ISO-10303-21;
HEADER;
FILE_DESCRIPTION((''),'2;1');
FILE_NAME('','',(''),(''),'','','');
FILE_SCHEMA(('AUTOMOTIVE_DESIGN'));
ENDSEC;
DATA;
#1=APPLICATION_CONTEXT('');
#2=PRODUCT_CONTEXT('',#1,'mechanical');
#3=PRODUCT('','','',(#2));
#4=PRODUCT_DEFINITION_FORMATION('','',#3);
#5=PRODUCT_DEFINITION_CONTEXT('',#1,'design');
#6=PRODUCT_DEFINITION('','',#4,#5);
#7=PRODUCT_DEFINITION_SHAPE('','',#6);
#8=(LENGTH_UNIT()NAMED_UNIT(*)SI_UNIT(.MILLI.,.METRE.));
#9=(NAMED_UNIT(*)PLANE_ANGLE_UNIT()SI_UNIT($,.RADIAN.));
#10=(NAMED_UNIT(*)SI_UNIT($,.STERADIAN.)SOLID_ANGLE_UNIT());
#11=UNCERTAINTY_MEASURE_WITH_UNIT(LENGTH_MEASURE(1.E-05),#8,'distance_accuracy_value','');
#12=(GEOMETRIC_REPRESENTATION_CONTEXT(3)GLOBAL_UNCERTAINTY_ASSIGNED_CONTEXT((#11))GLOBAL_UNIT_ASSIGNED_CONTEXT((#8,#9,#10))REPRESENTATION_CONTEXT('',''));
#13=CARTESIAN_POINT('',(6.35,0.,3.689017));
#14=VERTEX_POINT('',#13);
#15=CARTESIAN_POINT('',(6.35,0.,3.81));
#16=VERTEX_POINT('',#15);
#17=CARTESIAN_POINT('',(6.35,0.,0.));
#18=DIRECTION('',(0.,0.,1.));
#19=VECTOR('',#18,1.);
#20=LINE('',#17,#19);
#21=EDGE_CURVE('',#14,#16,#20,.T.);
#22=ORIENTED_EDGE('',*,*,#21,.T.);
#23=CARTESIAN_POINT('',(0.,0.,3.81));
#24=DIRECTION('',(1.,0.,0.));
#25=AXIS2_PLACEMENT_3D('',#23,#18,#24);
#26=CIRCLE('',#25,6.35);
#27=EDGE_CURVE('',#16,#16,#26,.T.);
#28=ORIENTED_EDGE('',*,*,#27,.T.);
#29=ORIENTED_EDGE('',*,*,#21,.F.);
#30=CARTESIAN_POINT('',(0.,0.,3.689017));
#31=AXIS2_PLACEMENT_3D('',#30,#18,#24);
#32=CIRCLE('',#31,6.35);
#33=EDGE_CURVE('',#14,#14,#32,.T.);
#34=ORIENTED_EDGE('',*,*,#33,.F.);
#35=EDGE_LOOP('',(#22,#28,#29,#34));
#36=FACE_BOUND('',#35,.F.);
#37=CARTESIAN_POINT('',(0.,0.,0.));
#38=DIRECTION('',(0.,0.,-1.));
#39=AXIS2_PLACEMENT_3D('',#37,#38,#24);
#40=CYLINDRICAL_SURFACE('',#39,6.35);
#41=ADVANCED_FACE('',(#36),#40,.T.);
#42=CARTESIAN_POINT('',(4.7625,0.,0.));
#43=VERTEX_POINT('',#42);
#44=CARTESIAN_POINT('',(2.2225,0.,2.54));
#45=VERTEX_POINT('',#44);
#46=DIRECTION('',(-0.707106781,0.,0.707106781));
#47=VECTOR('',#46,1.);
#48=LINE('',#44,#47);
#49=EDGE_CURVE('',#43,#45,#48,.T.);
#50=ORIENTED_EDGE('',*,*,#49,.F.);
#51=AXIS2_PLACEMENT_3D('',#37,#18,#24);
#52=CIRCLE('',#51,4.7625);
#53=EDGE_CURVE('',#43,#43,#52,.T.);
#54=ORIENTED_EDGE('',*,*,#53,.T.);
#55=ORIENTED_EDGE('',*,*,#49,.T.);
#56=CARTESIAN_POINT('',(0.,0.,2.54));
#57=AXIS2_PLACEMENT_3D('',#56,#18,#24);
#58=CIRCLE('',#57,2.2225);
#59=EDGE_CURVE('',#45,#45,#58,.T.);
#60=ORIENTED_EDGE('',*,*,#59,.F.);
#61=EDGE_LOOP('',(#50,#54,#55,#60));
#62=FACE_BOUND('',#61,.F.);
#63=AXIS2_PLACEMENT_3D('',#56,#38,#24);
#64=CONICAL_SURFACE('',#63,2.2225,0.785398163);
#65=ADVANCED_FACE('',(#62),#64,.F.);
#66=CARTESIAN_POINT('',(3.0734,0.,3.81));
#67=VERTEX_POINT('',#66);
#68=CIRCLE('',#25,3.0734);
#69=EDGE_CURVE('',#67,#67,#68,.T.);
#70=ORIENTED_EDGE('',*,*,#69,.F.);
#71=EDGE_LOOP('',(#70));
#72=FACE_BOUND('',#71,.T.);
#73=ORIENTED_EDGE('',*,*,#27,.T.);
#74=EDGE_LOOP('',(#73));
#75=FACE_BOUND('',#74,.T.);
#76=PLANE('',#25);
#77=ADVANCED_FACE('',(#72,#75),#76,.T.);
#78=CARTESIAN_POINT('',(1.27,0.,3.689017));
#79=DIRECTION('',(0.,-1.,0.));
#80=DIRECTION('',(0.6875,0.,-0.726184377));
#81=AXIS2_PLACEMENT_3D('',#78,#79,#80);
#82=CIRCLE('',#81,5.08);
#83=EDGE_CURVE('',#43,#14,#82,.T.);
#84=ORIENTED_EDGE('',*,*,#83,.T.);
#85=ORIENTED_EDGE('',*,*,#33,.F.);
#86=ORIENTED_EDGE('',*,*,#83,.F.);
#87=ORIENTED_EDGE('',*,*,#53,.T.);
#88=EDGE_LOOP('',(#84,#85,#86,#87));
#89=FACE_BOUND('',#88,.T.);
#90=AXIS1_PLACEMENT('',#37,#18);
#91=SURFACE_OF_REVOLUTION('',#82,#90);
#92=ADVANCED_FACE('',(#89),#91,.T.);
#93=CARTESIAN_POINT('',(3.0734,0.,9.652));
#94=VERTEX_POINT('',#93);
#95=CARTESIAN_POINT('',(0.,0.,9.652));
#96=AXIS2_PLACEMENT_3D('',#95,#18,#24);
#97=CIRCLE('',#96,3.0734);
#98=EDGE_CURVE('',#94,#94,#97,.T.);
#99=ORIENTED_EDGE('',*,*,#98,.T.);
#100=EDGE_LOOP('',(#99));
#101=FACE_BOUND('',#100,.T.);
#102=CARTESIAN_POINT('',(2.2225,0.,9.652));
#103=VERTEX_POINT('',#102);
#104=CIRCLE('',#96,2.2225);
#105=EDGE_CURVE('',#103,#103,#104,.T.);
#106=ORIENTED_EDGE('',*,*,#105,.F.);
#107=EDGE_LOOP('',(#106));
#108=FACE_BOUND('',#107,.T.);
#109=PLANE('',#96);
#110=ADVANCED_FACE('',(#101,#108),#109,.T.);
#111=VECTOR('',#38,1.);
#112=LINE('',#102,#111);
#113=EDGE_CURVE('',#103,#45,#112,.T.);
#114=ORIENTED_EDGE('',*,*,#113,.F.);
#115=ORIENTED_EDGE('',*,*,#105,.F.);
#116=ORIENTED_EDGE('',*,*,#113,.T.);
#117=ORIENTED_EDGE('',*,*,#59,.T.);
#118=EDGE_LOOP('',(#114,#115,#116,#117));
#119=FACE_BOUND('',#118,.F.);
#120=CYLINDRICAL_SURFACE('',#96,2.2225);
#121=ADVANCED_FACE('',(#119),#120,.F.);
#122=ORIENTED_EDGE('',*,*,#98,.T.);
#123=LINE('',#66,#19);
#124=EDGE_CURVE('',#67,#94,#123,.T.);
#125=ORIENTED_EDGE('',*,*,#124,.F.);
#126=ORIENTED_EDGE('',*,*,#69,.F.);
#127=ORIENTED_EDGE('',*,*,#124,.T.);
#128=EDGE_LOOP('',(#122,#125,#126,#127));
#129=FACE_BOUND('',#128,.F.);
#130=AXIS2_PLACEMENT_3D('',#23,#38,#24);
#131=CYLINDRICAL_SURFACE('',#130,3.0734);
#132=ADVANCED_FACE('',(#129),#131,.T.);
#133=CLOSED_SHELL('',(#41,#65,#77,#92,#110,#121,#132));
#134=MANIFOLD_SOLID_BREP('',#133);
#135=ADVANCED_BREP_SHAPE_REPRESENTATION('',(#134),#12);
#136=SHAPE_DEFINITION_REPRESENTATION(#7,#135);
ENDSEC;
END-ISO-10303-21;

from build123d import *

# Parameters (mm, degrees)
F0_R     = 6.35
F1_DEPTH = 3.81
F2_R     = 3.0734
F3_DEPTH = 5.842
F4_R     = 2.2225
F5_DEPTH = 9.653
F6_SIZE2 = 2.54
F6_SIZE  = 2.54


# Not quite as in the source:
# - a fillet or chamfer that OpenCascade refuses, or shapes differently, is made with other operations: its cross-section is extruded or revolved along the edge and cut away or added


with BuildPart() as f1:
    # F0 (on Top) → F1 (new body)
    with BuildSketch(Plane.XY):
        Circle(F0_R)
    extrude(amount=F1_DEPTH)

    # F2 (on face) → F3 (join)
    with BuildSketch(Plane.XY.offset(3.81)):
        Circle(F2_R)
    extrude(amount=F3_DEPTH)

    # F4 (on face) → F5 (cut, through all)
    with BuildSketch(Plane.XY.offset(9.652)):
        Circle(F4_R)
    extrude(amount=-F5_DEPTH, mode=Mode.SUBTRACT)

    # F6
    f6_edges = [f1.edges().sort_by_distance(p)[0] for p in [
        (-2.2225, 0, 0),
    ]]
    chamfer(f6_edges, length=F6_SIZE, length2=F6_SIZE2)

    # F7: fillet of radius 5.08 on 1 edges, made by hand

    # F7_s1 → F7_t2 (revolve, cut)
    with BuildSketch(Plane.XZ):
        with BuildLine():
            ThreePointArc((4.7625, 0), (5.93627796, 1.6809703231), (6.35, 3.6890166373))
            Line((6.35, 3.6890166373), (6.35, 0))
            Line((6.35, 0), (4.7625, 0))
        make_face()
    revolve(axis=Axis((0, 0, 0), (0, 0, 1)), mode=Mode.SUBTRACT)


solid = f1.part
